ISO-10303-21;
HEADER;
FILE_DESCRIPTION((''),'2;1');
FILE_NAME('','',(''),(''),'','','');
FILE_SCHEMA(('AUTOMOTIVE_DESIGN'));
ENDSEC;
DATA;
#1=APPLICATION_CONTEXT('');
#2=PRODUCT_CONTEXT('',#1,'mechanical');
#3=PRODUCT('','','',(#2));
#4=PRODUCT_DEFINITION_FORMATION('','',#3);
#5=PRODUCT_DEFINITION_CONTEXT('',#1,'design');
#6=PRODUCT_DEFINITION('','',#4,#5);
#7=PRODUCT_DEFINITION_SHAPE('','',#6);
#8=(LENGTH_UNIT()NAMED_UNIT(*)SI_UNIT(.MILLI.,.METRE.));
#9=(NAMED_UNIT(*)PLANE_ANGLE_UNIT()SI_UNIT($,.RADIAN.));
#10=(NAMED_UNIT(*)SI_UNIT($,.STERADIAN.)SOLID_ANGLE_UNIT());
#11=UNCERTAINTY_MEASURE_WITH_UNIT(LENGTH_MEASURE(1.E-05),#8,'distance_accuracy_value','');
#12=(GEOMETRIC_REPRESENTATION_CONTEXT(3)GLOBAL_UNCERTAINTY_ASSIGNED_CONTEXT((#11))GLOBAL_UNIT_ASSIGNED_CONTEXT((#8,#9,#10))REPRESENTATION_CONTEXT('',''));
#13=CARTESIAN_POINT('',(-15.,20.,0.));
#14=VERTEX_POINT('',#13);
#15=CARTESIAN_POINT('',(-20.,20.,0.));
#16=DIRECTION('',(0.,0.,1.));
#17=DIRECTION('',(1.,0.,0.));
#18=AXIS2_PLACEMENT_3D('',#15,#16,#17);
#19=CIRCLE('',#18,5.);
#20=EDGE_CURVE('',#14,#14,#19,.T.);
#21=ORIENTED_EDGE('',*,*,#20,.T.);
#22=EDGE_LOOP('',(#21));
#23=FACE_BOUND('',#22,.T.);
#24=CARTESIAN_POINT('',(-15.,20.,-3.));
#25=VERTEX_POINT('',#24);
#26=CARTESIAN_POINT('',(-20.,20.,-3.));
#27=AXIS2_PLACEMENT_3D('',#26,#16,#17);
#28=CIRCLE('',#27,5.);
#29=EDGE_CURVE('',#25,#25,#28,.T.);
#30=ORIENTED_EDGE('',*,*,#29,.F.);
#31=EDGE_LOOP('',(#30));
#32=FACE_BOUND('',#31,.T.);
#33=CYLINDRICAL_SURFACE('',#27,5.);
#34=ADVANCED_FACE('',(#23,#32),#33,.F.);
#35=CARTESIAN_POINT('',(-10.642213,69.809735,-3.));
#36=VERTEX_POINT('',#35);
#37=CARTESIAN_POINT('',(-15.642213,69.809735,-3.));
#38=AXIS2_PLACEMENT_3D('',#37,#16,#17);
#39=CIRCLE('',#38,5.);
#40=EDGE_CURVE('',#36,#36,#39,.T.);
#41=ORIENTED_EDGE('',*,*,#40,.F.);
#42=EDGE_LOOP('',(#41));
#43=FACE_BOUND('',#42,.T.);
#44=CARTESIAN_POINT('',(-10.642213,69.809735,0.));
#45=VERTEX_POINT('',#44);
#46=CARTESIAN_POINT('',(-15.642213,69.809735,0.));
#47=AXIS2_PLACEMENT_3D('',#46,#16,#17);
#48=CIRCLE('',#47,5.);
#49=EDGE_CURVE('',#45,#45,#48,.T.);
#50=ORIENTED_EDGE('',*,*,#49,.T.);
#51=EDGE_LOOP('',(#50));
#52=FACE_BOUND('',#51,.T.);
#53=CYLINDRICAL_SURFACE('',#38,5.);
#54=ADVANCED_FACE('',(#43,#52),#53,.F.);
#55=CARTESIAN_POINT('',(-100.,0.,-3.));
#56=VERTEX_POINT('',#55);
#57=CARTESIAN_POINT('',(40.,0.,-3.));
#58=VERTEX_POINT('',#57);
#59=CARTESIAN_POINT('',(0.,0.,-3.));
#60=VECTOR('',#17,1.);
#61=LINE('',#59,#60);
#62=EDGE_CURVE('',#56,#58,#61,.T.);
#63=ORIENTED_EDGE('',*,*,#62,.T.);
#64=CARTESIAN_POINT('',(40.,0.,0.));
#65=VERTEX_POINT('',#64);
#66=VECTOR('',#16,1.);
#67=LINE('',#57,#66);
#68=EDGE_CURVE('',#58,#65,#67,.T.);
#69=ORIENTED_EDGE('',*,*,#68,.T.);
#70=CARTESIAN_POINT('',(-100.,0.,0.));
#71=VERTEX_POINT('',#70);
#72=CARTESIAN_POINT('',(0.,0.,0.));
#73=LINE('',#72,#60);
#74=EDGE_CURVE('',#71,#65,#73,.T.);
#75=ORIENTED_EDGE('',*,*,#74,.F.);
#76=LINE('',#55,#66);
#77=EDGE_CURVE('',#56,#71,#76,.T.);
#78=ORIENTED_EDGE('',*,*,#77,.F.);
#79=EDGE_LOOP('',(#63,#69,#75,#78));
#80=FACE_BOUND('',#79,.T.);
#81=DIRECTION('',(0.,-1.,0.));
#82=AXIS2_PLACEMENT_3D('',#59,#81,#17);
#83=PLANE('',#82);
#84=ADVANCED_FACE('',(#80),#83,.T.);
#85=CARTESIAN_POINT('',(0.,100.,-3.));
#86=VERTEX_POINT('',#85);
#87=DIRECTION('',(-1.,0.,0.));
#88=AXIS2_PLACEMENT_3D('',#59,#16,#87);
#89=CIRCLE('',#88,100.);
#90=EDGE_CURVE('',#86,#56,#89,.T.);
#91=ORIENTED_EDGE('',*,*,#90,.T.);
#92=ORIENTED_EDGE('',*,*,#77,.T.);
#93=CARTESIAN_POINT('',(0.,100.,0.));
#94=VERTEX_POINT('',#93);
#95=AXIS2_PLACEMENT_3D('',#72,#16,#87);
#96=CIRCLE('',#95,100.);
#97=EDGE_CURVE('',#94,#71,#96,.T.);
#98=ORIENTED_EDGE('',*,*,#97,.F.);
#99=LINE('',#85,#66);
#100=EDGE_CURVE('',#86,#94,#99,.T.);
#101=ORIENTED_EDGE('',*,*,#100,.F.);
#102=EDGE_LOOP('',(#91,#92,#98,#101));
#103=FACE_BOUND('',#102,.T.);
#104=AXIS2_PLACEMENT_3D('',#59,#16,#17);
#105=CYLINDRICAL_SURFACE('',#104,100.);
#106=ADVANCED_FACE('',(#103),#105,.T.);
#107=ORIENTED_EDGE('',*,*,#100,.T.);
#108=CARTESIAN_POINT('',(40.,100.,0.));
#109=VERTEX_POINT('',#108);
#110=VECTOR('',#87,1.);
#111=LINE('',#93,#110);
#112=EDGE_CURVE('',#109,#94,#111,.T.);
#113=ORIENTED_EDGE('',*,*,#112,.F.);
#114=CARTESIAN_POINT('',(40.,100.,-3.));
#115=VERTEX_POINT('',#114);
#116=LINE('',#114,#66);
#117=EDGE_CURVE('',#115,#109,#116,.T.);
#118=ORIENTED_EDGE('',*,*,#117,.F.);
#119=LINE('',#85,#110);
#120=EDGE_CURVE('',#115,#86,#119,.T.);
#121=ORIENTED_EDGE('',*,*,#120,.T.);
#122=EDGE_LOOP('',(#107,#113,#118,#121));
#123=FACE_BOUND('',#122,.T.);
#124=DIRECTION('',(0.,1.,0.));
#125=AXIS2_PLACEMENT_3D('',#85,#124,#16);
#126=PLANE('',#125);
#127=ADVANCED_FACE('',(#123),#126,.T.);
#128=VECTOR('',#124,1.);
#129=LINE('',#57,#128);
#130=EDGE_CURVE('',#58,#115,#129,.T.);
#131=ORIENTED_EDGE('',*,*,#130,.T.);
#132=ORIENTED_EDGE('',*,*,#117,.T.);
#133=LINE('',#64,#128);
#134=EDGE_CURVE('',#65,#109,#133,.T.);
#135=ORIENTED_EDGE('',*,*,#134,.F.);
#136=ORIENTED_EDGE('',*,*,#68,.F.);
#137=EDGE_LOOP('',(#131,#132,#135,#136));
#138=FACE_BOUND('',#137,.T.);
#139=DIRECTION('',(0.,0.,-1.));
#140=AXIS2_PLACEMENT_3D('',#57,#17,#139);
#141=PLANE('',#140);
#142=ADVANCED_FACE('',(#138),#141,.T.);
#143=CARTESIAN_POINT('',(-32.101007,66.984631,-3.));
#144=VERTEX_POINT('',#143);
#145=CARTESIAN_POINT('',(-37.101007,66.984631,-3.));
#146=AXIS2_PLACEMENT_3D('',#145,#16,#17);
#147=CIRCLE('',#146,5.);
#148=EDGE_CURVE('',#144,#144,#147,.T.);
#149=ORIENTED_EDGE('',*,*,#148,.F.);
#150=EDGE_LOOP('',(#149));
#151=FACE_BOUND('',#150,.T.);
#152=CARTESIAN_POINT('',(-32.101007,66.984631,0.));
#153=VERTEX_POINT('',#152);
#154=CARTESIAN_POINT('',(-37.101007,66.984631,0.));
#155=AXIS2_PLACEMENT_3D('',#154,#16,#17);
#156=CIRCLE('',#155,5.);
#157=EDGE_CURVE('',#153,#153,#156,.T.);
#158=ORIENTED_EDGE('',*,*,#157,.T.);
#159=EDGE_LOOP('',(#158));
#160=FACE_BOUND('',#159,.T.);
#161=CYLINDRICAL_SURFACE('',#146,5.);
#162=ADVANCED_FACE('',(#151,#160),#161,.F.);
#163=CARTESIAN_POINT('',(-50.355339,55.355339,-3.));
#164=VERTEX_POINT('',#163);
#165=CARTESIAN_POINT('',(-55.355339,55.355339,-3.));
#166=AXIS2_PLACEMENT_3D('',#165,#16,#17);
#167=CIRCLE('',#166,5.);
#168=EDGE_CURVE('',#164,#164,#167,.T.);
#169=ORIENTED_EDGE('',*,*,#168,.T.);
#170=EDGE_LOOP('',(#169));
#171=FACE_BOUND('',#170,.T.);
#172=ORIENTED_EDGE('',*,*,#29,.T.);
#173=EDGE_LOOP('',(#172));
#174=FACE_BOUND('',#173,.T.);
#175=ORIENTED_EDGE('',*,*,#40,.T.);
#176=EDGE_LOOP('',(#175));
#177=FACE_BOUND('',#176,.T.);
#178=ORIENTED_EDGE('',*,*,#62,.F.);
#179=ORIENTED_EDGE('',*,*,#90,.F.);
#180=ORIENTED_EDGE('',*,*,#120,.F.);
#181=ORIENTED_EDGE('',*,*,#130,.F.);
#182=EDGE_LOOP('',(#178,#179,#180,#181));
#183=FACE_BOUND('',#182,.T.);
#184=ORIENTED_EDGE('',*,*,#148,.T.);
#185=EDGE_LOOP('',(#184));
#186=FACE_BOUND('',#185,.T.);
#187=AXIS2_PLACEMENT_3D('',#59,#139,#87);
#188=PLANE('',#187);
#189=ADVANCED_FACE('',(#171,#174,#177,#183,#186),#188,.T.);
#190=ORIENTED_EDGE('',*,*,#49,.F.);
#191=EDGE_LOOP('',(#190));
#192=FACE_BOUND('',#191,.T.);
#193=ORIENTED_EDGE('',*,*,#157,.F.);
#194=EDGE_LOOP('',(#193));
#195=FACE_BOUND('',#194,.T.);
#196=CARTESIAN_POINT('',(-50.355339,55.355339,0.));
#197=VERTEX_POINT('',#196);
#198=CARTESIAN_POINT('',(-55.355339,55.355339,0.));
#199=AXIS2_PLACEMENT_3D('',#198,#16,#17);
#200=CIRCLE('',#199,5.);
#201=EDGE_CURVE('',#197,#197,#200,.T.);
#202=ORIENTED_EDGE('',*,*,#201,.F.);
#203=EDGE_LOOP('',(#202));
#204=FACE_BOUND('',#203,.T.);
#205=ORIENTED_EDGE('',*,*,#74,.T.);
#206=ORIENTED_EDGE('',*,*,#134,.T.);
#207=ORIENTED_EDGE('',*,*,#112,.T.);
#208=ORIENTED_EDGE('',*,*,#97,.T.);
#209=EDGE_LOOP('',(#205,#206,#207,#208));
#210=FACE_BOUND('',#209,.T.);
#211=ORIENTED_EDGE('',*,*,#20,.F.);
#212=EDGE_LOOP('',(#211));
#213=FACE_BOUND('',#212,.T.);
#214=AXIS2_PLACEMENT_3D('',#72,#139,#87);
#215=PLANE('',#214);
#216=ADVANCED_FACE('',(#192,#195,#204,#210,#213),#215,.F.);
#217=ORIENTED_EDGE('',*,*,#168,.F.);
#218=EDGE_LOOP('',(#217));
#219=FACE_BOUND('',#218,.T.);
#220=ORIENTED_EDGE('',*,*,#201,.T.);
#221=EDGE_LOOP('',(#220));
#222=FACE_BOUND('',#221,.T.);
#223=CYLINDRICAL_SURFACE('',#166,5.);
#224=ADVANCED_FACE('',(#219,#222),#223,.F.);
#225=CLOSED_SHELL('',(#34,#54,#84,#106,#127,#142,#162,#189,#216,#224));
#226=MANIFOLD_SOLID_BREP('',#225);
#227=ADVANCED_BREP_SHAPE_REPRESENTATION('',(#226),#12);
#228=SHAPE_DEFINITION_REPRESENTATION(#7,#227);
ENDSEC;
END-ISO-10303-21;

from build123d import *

# Parameters (mm, degrees)
ESBO_O1_R          = 5
FLANGE_BASE1_DEPTH = 3


# Sheet-metal steps are written as plain solids
with BuildPart() as part:
    # Esboço1 → Flange-base1 (new body)
    with BuildSketch(Plane.XY):
        with BuildLine():
            Line((0, 0), (-100, 0))
            ThreePointArc((-100, 0), (-70.710678119, 70.710678119), (0, 100))
            Line((0, 100), (40, 100))
            Line((40, 100), (40, 0))
            Line((40, 0), (0, 0))
        make_face()
        with Locations((-20, 20)):
            Circle(ESBO_O1_R, mode=Mode.SUBTRACT)
        with Locations((-55.355339059, 55.355339059)):
            Circle(ESBO_O1_R, mode=Mode.SUBTRACT)
        with Locations((-37.101007166, 66.984631039)):
            Circle(ESBO_O1_R, mode=Mode.SUBTRACT)
        with Locations((-15.642212863, 69.809734905)):
            Circle(ESBO_O1_R, mode=Mode.SUBTRACT)
    extrude(amount=-FLANGE_BASE1_DEPTH)


solid = part.part
